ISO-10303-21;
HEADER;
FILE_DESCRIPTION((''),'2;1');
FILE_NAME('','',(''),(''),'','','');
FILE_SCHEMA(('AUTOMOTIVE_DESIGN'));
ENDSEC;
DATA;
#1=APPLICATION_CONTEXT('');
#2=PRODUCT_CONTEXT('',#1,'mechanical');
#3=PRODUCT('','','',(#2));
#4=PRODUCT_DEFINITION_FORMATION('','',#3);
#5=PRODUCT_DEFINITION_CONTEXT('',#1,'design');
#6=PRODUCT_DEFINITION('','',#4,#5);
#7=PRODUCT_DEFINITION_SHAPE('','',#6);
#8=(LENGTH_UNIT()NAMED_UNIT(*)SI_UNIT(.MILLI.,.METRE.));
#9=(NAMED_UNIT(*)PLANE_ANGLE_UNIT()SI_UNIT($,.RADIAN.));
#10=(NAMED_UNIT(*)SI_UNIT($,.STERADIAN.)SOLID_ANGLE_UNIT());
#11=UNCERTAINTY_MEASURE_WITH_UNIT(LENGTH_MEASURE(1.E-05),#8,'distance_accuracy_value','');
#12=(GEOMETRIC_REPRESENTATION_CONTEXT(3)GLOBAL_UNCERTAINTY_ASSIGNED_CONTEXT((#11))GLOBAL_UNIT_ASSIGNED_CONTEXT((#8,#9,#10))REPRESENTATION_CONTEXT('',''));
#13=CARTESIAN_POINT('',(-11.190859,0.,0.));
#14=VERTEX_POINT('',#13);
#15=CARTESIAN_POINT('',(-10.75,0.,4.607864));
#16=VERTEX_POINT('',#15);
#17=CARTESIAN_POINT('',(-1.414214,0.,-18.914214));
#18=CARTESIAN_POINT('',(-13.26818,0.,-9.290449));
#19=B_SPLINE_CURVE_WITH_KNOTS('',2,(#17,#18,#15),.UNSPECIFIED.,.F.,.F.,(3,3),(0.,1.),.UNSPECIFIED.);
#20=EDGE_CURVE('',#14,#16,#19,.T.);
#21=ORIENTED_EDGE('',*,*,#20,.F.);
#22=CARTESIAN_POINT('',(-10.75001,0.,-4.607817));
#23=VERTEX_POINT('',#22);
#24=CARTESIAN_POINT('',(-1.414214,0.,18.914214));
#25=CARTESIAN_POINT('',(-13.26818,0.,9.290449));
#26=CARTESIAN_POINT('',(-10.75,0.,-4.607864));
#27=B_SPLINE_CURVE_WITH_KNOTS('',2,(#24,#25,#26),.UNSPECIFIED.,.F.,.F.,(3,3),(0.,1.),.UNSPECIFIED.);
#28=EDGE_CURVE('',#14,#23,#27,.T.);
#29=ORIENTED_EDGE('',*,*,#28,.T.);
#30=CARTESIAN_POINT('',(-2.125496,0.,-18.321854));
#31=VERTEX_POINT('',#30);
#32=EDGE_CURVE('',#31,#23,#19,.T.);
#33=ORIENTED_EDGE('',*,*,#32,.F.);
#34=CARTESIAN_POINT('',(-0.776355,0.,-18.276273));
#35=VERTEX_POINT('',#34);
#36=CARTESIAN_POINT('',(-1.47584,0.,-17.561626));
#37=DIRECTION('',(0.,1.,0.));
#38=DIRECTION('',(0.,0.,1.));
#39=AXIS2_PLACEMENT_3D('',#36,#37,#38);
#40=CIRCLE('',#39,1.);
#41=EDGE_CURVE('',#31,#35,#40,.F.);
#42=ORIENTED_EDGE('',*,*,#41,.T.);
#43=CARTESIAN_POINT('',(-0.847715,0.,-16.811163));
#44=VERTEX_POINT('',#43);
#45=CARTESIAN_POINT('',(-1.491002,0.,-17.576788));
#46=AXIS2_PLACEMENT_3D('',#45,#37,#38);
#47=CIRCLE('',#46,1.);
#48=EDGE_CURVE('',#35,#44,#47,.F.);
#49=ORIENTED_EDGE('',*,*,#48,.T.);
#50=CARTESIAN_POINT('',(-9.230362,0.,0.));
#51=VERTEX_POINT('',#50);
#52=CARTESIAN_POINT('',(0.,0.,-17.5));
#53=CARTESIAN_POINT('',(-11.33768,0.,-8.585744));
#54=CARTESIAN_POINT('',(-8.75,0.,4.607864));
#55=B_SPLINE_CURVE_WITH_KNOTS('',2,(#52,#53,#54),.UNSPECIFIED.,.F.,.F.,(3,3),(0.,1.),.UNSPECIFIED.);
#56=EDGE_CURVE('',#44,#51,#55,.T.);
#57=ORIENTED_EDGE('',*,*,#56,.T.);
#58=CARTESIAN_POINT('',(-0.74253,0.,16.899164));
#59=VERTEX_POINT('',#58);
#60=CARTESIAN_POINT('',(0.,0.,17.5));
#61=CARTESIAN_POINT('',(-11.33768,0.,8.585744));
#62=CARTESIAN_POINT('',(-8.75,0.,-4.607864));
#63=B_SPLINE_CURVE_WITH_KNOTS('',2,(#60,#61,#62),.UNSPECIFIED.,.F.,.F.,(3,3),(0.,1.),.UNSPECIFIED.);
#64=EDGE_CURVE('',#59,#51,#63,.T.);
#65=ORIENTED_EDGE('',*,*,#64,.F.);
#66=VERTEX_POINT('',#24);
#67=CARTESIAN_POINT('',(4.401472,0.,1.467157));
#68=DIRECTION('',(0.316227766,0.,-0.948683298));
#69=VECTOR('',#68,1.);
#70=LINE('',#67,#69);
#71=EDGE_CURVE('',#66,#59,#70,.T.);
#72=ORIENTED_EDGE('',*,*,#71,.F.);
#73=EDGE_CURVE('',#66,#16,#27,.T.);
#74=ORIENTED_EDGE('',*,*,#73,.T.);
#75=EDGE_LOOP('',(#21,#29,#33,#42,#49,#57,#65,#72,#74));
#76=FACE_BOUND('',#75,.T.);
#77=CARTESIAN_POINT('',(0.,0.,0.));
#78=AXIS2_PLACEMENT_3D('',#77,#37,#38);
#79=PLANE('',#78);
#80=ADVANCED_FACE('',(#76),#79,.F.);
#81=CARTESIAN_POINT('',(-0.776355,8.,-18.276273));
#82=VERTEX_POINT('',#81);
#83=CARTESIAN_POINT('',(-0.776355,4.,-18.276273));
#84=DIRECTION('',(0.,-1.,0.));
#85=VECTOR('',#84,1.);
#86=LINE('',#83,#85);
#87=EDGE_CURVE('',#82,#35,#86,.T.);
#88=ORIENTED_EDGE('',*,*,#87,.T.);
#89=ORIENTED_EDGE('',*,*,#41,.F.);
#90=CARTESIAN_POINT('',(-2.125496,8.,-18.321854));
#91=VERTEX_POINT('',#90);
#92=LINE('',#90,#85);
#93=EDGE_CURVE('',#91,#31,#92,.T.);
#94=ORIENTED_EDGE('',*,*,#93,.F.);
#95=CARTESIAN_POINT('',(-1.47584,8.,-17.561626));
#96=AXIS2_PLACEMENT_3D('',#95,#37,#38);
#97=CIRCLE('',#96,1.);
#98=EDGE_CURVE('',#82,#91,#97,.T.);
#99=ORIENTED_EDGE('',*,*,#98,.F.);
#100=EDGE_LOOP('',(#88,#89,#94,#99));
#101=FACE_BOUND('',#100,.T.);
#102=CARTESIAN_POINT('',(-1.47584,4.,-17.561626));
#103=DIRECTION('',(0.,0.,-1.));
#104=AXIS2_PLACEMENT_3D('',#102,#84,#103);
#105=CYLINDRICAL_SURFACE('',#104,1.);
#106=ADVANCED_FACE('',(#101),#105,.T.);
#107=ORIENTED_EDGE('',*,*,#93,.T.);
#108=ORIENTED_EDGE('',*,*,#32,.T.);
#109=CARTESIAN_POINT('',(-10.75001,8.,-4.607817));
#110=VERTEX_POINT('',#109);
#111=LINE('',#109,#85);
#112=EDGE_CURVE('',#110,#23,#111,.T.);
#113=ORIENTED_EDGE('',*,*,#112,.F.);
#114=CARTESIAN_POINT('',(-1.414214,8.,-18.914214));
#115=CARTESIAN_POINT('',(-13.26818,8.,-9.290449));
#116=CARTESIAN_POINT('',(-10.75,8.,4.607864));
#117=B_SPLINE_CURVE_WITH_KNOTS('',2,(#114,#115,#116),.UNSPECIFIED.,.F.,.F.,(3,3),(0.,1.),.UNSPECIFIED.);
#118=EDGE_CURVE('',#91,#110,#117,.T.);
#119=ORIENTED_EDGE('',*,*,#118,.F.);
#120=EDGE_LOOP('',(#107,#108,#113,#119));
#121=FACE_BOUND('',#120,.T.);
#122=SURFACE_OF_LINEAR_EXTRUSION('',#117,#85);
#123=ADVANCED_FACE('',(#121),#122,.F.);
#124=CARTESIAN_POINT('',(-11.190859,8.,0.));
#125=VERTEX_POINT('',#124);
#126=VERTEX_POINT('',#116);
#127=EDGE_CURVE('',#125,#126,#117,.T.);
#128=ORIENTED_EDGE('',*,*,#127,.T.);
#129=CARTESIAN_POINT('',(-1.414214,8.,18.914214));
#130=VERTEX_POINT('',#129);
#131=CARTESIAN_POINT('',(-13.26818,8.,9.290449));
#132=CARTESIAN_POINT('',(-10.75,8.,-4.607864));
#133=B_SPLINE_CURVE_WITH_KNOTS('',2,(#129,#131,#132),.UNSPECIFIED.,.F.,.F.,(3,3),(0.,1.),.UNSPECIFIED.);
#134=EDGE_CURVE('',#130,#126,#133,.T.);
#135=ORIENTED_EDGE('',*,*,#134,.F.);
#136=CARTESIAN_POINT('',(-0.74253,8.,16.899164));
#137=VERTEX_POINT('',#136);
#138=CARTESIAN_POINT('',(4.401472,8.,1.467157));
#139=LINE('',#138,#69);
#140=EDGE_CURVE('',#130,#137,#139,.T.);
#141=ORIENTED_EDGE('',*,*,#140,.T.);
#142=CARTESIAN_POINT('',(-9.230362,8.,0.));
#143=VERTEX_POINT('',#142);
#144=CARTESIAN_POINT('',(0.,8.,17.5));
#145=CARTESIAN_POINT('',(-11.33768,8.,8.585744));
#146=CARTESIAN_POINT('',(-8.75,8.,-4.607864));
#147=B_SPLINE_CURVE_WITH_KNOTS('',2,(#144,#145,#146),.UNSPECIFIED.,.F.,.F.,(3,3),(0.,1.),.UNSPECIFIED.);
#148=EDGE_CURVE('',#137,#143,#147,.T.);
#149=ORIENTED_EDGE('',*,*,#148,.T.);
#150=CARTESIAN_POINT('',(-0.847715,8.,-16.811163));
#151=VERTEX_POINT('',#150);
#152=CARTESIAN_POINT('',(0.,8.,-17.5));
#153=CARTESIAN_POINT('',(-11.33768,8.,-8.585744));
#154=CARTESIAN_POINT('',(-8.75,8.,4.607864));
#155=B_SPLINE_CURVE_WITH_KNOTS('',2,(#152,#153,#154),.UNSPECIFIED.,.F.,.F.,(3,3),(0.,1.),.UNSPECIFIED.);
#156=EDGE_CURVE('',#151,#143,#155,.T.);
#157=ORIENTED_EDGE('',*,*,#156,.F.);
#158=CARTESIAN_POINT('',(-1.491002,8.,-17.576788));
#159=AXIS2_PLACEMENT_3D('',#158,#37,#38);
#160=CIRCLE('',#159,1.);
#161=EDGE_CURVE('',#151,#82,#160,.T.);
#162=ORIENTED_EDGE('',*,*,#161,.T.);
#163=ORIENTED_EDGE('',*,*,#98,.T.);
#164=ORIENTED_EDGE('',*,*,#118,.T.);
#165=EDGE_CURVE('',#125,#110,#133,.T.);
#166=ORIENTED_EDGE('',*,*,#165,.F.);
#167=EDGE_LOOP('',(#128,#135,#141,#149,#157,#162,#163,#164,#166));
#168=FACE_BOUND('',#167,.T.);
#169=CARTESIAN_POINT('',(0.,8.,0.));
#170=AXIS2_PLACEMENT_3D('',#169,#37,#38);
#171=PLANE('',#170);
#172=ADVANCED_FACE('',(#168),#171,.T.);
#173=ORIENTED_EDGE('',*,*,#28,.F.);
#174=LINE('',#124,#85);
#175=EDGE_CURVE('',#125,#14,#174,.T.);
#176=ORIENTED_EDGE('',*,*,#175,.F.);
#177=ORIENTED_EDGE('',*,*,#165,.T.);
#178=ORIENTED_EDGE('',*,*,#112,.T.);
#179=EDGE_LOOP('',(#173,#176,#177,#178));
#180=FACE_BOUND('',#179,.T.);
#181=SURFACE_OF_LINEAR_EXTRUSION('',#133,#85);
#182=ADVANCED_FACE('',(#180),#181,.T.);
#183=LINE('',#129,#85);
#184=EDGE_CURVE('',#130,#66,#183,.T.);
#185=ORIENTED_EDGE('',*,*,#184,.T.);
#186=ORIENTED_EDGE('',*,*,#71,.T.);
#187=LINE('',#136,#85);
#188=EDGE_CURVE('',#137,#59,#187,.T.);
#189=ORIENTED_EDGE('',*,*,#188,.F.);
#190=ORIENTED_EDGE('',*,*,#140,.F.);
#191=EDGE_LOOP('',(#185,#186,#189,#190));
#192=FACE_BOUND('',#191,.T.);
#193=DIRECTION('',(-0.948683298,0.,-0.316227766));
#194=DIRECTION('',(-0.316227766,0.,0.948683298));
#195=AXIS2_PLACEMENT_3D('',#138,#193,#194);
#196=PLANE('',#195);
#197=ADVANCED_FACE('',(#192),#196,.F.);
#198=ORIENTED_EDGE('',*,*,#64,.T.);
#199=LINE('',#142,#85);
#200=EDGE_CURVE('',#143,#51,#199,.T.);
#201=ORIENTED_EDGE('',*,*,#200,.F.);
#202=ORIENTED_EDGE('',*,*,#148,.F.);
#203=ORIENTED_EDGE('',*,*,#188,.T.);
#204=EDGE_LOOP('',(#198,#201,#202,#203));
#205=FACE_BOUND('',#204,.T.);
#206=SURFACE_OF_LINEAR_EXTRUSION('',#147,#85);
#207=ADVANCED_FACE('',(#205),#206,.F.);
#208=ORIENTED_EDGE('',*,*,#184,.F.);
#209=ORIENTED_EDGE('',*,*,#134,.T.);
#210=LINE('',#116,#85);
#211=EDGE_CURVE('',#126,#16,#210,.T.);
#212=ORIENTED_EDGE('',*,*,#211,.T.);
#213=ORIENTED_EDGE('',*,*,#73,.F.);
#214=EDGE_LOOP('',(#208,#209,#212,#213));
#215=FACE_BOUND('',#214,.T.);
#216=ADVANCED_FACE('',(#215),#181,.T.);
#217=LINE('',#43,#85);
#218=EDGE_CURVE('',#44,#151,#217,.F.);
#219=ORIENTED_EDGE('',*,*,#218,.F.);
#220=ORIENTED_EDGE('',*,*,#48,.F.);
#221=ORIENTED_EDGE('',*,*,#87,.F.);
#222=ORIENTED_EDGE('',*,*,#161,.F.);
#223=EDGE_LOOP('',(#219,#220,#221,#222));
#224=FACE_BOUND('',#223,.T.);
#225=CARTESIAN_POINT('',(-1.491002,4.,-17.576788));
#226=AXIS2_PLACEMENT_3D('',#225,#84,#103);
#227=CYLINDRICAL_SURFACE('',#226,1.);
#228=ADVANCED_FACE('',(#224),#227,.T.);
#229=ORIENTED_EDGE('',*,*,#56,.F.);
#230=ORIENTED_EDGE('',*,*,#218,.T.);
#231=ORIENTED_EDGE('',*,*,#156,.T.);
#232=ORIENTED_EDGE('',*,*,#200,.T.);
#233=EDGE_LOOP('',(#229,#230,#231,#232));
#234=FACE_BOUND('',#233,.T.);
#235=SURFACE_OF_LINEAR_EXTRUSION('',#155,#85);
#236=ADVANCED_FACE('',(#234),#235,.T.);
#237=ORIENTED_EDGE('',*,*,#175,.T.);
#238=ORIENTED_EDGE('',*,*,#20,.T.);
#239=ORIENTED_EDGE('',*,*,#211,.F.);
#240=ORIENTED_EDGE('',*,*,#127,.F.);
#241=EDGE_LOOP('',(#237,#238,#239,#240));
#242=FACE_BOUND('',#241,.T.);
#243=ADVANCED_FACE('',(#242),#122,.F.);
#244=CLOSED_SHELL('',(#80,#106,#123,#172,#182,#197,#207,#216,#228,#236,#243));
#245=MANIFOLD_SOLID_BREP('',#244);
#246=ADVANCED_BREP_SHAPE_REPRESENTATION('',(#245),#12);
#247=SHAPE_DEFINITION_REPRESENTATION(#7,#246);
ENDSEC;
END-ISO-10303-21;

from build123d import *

# Parameters (mm, degrees)
EXTRUDE_1_DEPTH = 8
FILLET_2_R      = 1


with BuildPart() as part:
    # 草图1 → 凸台-拉伸1 (new body)
    with BuildSketch(Plane(origin=(0, 0, 0), x_dir=(1, 0, 0), z_dir=(0, 1, 0))):
        with BuildLine():
            add(Edge.make_bspline(
                [(0, 17.5), (-3.018559866, 15.126656034), (-5.050027734, 12.449972293)],
                knots=[0, 0, 0, 0.266241411, 0.266241411, 0.266241411], degree=2))
            ThreePointArc((0, 17.5), (-1.715353459, 17.415727447), (-3.414186094, 17.16372143))
            add(Edge.make_bspline(
                [(-3.414186094, 17.16372143), (-8.043161647, 12.78312826), (-9.916919162, 7.583080838)],
                knots=[0.089180087, 0.089180087, 0.089180087, 0.527021845, 0.527021845, 0.527021845], degree=2))
            add(Edge.make_bspline(
                [(-9.916919162, 7.583080838), (-10.441389168, 6.127572919), (-10.75, 4.607864376)],
                knots=[0.527021845, 0.527021845, 0.527021845, 0.649574986, 0.649574986, 0.649574986], degree=2))
            add(Edge.make_bspline(
                [(-11.190859313, 0), (-11.178661457, 2.24200009), (-10.75, 4.607864376)],
                knots=[0.829773285, 0.829773285, 0.829773285, 1, 1, 1], degree=2))
            add(Edge.make_bspline(
                [(-11.190859313, 0), (-11.178661457, -2.24200009), (-10.75, -4.607864376)],
                knots=[0.829773285, 0.829773285, 0.829773285, 1, 1, 1], degree=2))
            add(Edge.make_bspline(
                [(-3.414186094, -17.16372143), (-9.338824941, -11.556987894), (-10.75, -4.607864376)],
                knots=[0.089180087, 0.089180087, 0.089180087, 0.649574986, 0.649574986, 0.649574986], degree=2))
            ThreePointArc((-3.414186094, -17.16372143), (-2.179900554, -17.36369873), (-0.934486298, -17.47503177))
            Line((-0.934486298, -17.47503177), (-0.742530402, -16.899164082))
            add(Edge.make_bspline(
                [(-0.742530402, -16.899164082), (-3.273656048, -14.790538581), (-5.050027734, -12.449972293)],
                knots=[0.033432558, 0.033432558, 0.033432558, 0.266241411, 0.266241411, 0.266241411], degree=2))
            add(Edge.make_bspline(
                [(-5.050027734, -12.449972293), (-7.812978864, -8.809478401), (-8.75, -4.607864376)],
                knots=[0.266241411, 0.266241411, 0.266241411, 0.628350021, 0.628350021, 0.628350021], degree=2))
            add(Edge.make_bspline(
                [(-8.75, -4.607864376), (-9.246260347, -2.382627023), (-9.23036206, 0)],
                knots=[0.628350021, 0.628350021, 0.628350021, 0.820128134, 0.820128134, 0.820128134], degree=2))
            add(Edge.make_bspline(
                [(-8.75, 4.607864376), (-9.246260347, 2.382627023), (-9.23036206, 0)],
                knots=[0.628350021, 0.628350021, 0.628350021, 0.820128134, 0.820128134, 0.820128134], degree=2))
            add(Edge.make_bspline(
                [(-5.050027734, 12.449972293), (-7.812978864, 8.809478401), (-8.75, 4.607864376)],
                knots=[0.266241411, 0.266241411, 0.266241411, 0.628350021, 0.628350021, 0.628350021], degree=2))
        make_face()
        with BuildLine():
            ThreePointArc((-3.414186094, 17.16372143), (-1.715353459, 17.415727447), (0, 17.5))
            Line((0, 17.5), (-1.414213562, 18.914213562))
            add(Edge.make_bspline(
                [(-1.414213562, 18.914213562), (-2.471351299, 18.05596543), (-3.414186094, 17.16372143)],
                knots=[0, 0, 0, 0.089180087, 0.089180087, 0.089180087], degree=2))
        make_face()
        with BuildLine():
            add(Edge.make_bspline(
                [(-1.414213562, -18.914213562), (-2.471351299, -18.05596543), (-3.414186094, -17.16372143)],
                knots=[0, 0, 0, 0.089180087, 0.089180087, 0.089180087], degree=2))
            Line((-1.414213562, -18.914213562), (-0.934486298, -17.47503177))
            ThreePointArc((-0.934486298, -17.47503177), (-2.179900554, -17.36369873), (-3.414186094, -17.16372143))
        make_face()
    extrude(amount=EXTRUDE_1_DEPTH)

    # 圆角2
    # the kernel refuses this fillet: 1 mm, written as the material it takes off along each edge
    with BuildSketch(Plane(origin=(-1.414213562, 0, -18.914213562), x_dir=(0.7071067811865474, 0, 0.7071067811865478), z_dir=(0, 1, 0))) as fillet_2_piece_1:
        with BuildLine():
            CenterArc((0.912847355, -1), FILLET_2_R, 90, 85.515704576)
            Line((-0.084091447, -0.921814159), (-0.104030223, -0.920250442))
            ThreePointArc((-0.104030223, -0.920250442), (-0.06486668, -0.458824048), (-0.019893041, 0.002065651))
            Line((-0.019893041, 0.002065651), (0, 0.02))
            Line((0, 0.02), (0.912847355, 0.02))
            Line((0.912847355, 0.02), (0.912847355, 0))
        make_face()
    extrude(amount=8, mode=Mode.SUBTRACT)
    with BuildSketch(Plane(origin=(0, 0, -17.5), x_dir=(-0.7760833502518973, 0, 0.6306303461313852), z_dir=(0, 1, 0))) as fillet_2_piece_2:
        with BuildLine():
            CenterArc((1.108716697, -0.99986523), FILLET_2_R, 90.940675656, 94.962680688)
            Line((0.114019904, -1.102716035), (0.094125968, -1.104773051))
            Line((0.094125968, -1.104773051), (-0.019893936, -0.002057016))
            Line((-0.019893936, -0.002057016), (0.000321277, 0.019997419))
            ThreePointArc((0.000321277, 0.019997419), (0.546151149, 0.015565202), (1.091971205, 0.019997305))
            Line((1.091971205, 0.019997305), (1.092299548, 0))
        make_face()
    extrude(amount=8, mode=Mode.SUBTRACT)


solid = part.part
